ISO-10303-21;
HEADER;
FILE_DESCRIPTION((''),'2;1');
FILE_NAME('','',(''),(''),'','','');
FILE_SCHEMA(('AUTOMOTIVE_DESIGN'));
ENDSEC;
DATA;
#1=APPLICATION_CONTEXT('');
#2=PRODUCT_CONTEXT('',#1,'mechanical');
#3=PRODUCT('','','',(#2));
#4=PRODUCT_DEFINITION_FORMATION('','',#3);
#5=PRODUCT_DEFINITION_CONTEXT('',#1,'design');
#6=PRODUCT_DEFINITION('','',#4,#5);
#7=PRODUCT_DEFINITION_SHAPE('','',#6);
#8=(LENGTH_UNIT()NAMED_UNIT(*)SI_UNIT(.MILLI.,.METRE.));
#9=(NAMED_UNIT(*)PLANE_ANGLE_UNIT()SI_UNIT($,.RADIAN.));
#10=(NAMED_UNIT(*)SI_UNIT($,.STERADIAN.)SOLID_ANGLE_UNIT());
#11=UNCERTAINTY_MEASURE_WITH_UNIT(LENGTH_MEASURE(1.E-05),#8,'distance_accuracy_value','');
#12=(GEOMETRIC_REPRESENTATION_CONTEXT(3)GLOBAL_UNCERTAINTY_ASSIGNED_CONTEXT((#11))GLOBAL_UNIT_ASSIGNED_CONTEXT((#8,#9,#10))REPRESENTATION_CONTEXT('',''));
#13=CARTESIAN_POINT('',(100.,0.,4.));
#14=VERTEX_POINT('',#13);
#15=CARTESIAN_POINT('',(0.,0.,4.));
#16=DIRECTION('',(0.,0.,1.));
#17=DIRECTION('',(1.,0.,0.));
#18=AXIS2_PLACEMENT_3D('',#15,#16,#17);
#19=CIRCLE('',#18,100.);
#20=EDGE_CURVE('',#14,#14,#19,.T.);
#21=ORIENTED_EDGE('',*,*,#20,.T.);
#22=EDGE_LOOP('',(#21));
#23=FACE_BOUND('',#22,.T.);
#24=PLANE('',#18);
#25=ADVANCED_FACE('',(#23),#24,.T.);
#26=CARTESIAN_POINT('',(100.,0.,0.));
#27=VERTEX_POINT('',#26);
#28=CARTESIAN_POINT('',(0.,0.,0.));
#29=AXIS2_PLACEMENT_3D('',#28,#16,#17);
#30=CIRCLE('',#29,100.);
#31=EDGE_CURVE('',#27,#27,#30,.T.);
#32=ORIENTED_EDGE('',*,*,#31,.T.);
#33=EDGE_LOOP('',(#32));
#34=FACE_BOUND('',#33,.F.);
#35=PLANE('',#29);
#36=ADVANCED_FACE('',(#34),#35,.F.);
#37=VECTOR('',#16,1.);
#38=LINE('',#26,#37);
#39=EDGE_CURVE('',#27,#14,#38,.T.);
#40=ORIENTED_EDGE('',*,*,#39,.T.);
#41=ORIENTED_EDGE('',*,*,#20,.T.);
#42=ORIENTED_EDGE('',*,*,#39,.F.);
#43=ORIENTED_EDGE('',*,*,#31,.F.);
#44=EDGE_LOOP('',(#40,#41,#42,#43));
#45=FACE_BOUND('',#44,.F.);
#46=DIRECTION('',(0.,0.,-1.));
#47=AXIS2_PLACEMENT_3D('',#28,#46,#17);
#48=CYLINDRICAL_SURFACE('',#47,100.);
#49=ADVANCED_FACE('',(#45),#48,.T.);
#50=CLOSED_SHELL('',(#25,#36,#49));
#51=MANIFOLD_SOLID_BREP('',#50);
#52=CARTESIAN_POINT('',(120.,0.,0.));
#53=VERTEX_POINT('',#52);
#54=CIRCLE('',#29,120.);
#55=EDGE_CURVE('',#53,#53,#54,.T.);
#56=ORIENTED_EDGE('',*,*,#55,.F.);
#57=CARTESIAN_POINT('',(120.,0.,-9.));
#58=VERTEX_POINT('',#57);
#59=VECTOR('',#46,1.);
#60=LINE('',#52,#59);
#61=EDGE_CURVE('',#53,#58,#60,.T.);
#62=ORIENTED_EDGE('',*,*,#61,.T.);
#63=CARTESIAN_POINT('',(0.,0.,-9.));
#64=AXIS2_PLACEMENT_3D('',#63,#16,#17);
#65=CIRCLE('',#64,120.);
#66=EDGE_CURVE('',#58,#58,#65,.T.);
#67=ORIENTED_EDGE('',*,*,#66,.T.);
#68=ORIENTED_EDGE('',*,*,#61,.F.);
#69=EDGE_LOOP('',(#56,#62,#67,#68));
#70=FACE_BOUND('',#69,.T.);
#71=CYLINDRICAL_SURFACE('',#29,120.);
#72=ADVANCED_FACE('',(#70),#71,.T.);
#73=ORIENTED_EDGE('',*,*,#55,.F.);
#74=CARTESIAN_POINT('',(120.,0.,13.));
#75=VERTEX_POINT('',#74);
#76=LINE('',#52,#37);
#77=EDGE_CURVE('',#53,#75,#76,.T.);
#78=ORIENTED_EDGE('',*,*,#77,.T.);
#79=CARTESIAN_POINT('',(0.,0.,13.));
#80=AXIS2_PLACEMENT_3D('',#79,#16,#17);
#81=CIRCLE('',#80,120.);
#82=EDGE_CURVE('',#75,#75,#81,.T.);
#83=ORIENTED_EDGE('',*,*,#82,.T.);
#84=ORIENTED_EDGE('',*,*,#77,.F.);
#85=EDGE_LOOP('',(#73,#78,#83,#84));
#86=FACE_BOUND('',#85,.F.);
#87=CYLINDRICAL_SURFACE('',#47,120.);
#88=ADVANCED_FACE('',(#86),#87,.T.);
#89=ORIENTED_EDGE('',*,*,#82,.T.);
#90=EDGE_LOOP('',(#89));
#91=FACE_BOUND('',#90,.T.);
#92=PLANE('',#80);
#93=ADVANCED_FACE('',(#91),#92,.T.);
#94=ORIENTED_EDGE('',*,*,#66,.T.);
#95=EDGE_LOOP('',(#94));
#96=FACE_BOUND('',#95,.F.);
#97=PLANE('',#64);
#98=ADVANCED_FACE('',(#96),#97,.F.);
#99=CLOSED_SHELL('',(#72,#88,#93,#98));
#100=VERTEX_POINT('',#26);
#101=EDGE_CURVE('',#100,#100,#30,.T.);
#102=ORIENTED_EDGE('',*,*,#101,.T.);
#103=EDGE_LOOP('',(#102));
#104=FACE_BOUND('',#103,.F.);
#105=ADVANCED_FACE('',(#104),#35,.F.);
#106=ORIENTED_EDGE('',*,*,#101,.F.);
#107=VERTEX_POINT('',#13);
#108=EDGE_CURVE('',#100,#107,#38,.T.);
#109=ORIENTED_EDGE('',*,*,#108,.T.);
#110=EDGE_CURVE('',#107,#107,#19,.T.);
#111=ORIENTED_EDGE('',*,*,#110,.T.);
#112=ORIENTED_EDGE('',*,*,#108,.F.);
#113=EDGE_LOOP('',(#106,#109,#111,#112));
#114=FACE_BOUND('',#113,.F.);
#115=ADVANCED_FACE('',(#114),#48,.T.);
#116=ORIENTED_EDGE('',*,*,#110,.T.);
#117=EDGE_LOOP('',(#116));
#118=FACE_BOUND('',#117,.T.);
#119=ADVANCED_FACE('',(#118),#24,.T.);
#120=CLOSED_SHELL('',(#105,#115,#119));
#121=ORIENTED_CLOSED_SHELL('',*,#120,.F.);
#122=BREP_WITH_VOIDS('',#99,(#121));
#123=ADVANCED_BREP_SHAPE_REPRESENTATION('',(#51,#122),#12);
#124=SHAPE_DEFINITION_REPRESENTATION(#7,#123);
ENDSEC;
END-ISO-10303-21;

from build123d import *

# Parameters (mm, degrees)
F0_R     = 120
F0_R_2   = 100
F1_DEPTH = 9
F2_DEPTH = 4
F3_DEPTH = 13
F4_DEPTH = 9


with BuildPart() as f1:
    # F0 (on Top) → F1 (new body)
    with BuildSketch(Plane.XY):
        Circle(F0_R)
        Circle(F0_R_2, mode=Mode.SUBTRACT)
        Circle(F0_R_2)
    extrude(amount=-F1_DEPTH)

    # F0 (on Top) → F3 (join)
    with BuildSketch(Plane.XY):
        Circle(F0_R)
        Circle(F0_R_2, mode=Mode.SUBTRACT)
    extrude(amount=F3_DEPTH)



with BuildPart() as f2:
    # F0 (on Top) → F2 (new body)
    with BuildSketch(Plane.XY):
        Circle(F0_R_2)
    extrude(amount=F2_DEPTH)


with BuildPart() as f1_1:
    add(f1.part)
    # F4 (add): a face of the model
    f4_faces = [f2.part.faces().sort_by_distance(p)[0] for p in [
        (0, 0, 4),
    ]]
    extrude(f4_faces, amount=F4_DEPTH)


solid = Compound([f2.part, f1_1.part])
